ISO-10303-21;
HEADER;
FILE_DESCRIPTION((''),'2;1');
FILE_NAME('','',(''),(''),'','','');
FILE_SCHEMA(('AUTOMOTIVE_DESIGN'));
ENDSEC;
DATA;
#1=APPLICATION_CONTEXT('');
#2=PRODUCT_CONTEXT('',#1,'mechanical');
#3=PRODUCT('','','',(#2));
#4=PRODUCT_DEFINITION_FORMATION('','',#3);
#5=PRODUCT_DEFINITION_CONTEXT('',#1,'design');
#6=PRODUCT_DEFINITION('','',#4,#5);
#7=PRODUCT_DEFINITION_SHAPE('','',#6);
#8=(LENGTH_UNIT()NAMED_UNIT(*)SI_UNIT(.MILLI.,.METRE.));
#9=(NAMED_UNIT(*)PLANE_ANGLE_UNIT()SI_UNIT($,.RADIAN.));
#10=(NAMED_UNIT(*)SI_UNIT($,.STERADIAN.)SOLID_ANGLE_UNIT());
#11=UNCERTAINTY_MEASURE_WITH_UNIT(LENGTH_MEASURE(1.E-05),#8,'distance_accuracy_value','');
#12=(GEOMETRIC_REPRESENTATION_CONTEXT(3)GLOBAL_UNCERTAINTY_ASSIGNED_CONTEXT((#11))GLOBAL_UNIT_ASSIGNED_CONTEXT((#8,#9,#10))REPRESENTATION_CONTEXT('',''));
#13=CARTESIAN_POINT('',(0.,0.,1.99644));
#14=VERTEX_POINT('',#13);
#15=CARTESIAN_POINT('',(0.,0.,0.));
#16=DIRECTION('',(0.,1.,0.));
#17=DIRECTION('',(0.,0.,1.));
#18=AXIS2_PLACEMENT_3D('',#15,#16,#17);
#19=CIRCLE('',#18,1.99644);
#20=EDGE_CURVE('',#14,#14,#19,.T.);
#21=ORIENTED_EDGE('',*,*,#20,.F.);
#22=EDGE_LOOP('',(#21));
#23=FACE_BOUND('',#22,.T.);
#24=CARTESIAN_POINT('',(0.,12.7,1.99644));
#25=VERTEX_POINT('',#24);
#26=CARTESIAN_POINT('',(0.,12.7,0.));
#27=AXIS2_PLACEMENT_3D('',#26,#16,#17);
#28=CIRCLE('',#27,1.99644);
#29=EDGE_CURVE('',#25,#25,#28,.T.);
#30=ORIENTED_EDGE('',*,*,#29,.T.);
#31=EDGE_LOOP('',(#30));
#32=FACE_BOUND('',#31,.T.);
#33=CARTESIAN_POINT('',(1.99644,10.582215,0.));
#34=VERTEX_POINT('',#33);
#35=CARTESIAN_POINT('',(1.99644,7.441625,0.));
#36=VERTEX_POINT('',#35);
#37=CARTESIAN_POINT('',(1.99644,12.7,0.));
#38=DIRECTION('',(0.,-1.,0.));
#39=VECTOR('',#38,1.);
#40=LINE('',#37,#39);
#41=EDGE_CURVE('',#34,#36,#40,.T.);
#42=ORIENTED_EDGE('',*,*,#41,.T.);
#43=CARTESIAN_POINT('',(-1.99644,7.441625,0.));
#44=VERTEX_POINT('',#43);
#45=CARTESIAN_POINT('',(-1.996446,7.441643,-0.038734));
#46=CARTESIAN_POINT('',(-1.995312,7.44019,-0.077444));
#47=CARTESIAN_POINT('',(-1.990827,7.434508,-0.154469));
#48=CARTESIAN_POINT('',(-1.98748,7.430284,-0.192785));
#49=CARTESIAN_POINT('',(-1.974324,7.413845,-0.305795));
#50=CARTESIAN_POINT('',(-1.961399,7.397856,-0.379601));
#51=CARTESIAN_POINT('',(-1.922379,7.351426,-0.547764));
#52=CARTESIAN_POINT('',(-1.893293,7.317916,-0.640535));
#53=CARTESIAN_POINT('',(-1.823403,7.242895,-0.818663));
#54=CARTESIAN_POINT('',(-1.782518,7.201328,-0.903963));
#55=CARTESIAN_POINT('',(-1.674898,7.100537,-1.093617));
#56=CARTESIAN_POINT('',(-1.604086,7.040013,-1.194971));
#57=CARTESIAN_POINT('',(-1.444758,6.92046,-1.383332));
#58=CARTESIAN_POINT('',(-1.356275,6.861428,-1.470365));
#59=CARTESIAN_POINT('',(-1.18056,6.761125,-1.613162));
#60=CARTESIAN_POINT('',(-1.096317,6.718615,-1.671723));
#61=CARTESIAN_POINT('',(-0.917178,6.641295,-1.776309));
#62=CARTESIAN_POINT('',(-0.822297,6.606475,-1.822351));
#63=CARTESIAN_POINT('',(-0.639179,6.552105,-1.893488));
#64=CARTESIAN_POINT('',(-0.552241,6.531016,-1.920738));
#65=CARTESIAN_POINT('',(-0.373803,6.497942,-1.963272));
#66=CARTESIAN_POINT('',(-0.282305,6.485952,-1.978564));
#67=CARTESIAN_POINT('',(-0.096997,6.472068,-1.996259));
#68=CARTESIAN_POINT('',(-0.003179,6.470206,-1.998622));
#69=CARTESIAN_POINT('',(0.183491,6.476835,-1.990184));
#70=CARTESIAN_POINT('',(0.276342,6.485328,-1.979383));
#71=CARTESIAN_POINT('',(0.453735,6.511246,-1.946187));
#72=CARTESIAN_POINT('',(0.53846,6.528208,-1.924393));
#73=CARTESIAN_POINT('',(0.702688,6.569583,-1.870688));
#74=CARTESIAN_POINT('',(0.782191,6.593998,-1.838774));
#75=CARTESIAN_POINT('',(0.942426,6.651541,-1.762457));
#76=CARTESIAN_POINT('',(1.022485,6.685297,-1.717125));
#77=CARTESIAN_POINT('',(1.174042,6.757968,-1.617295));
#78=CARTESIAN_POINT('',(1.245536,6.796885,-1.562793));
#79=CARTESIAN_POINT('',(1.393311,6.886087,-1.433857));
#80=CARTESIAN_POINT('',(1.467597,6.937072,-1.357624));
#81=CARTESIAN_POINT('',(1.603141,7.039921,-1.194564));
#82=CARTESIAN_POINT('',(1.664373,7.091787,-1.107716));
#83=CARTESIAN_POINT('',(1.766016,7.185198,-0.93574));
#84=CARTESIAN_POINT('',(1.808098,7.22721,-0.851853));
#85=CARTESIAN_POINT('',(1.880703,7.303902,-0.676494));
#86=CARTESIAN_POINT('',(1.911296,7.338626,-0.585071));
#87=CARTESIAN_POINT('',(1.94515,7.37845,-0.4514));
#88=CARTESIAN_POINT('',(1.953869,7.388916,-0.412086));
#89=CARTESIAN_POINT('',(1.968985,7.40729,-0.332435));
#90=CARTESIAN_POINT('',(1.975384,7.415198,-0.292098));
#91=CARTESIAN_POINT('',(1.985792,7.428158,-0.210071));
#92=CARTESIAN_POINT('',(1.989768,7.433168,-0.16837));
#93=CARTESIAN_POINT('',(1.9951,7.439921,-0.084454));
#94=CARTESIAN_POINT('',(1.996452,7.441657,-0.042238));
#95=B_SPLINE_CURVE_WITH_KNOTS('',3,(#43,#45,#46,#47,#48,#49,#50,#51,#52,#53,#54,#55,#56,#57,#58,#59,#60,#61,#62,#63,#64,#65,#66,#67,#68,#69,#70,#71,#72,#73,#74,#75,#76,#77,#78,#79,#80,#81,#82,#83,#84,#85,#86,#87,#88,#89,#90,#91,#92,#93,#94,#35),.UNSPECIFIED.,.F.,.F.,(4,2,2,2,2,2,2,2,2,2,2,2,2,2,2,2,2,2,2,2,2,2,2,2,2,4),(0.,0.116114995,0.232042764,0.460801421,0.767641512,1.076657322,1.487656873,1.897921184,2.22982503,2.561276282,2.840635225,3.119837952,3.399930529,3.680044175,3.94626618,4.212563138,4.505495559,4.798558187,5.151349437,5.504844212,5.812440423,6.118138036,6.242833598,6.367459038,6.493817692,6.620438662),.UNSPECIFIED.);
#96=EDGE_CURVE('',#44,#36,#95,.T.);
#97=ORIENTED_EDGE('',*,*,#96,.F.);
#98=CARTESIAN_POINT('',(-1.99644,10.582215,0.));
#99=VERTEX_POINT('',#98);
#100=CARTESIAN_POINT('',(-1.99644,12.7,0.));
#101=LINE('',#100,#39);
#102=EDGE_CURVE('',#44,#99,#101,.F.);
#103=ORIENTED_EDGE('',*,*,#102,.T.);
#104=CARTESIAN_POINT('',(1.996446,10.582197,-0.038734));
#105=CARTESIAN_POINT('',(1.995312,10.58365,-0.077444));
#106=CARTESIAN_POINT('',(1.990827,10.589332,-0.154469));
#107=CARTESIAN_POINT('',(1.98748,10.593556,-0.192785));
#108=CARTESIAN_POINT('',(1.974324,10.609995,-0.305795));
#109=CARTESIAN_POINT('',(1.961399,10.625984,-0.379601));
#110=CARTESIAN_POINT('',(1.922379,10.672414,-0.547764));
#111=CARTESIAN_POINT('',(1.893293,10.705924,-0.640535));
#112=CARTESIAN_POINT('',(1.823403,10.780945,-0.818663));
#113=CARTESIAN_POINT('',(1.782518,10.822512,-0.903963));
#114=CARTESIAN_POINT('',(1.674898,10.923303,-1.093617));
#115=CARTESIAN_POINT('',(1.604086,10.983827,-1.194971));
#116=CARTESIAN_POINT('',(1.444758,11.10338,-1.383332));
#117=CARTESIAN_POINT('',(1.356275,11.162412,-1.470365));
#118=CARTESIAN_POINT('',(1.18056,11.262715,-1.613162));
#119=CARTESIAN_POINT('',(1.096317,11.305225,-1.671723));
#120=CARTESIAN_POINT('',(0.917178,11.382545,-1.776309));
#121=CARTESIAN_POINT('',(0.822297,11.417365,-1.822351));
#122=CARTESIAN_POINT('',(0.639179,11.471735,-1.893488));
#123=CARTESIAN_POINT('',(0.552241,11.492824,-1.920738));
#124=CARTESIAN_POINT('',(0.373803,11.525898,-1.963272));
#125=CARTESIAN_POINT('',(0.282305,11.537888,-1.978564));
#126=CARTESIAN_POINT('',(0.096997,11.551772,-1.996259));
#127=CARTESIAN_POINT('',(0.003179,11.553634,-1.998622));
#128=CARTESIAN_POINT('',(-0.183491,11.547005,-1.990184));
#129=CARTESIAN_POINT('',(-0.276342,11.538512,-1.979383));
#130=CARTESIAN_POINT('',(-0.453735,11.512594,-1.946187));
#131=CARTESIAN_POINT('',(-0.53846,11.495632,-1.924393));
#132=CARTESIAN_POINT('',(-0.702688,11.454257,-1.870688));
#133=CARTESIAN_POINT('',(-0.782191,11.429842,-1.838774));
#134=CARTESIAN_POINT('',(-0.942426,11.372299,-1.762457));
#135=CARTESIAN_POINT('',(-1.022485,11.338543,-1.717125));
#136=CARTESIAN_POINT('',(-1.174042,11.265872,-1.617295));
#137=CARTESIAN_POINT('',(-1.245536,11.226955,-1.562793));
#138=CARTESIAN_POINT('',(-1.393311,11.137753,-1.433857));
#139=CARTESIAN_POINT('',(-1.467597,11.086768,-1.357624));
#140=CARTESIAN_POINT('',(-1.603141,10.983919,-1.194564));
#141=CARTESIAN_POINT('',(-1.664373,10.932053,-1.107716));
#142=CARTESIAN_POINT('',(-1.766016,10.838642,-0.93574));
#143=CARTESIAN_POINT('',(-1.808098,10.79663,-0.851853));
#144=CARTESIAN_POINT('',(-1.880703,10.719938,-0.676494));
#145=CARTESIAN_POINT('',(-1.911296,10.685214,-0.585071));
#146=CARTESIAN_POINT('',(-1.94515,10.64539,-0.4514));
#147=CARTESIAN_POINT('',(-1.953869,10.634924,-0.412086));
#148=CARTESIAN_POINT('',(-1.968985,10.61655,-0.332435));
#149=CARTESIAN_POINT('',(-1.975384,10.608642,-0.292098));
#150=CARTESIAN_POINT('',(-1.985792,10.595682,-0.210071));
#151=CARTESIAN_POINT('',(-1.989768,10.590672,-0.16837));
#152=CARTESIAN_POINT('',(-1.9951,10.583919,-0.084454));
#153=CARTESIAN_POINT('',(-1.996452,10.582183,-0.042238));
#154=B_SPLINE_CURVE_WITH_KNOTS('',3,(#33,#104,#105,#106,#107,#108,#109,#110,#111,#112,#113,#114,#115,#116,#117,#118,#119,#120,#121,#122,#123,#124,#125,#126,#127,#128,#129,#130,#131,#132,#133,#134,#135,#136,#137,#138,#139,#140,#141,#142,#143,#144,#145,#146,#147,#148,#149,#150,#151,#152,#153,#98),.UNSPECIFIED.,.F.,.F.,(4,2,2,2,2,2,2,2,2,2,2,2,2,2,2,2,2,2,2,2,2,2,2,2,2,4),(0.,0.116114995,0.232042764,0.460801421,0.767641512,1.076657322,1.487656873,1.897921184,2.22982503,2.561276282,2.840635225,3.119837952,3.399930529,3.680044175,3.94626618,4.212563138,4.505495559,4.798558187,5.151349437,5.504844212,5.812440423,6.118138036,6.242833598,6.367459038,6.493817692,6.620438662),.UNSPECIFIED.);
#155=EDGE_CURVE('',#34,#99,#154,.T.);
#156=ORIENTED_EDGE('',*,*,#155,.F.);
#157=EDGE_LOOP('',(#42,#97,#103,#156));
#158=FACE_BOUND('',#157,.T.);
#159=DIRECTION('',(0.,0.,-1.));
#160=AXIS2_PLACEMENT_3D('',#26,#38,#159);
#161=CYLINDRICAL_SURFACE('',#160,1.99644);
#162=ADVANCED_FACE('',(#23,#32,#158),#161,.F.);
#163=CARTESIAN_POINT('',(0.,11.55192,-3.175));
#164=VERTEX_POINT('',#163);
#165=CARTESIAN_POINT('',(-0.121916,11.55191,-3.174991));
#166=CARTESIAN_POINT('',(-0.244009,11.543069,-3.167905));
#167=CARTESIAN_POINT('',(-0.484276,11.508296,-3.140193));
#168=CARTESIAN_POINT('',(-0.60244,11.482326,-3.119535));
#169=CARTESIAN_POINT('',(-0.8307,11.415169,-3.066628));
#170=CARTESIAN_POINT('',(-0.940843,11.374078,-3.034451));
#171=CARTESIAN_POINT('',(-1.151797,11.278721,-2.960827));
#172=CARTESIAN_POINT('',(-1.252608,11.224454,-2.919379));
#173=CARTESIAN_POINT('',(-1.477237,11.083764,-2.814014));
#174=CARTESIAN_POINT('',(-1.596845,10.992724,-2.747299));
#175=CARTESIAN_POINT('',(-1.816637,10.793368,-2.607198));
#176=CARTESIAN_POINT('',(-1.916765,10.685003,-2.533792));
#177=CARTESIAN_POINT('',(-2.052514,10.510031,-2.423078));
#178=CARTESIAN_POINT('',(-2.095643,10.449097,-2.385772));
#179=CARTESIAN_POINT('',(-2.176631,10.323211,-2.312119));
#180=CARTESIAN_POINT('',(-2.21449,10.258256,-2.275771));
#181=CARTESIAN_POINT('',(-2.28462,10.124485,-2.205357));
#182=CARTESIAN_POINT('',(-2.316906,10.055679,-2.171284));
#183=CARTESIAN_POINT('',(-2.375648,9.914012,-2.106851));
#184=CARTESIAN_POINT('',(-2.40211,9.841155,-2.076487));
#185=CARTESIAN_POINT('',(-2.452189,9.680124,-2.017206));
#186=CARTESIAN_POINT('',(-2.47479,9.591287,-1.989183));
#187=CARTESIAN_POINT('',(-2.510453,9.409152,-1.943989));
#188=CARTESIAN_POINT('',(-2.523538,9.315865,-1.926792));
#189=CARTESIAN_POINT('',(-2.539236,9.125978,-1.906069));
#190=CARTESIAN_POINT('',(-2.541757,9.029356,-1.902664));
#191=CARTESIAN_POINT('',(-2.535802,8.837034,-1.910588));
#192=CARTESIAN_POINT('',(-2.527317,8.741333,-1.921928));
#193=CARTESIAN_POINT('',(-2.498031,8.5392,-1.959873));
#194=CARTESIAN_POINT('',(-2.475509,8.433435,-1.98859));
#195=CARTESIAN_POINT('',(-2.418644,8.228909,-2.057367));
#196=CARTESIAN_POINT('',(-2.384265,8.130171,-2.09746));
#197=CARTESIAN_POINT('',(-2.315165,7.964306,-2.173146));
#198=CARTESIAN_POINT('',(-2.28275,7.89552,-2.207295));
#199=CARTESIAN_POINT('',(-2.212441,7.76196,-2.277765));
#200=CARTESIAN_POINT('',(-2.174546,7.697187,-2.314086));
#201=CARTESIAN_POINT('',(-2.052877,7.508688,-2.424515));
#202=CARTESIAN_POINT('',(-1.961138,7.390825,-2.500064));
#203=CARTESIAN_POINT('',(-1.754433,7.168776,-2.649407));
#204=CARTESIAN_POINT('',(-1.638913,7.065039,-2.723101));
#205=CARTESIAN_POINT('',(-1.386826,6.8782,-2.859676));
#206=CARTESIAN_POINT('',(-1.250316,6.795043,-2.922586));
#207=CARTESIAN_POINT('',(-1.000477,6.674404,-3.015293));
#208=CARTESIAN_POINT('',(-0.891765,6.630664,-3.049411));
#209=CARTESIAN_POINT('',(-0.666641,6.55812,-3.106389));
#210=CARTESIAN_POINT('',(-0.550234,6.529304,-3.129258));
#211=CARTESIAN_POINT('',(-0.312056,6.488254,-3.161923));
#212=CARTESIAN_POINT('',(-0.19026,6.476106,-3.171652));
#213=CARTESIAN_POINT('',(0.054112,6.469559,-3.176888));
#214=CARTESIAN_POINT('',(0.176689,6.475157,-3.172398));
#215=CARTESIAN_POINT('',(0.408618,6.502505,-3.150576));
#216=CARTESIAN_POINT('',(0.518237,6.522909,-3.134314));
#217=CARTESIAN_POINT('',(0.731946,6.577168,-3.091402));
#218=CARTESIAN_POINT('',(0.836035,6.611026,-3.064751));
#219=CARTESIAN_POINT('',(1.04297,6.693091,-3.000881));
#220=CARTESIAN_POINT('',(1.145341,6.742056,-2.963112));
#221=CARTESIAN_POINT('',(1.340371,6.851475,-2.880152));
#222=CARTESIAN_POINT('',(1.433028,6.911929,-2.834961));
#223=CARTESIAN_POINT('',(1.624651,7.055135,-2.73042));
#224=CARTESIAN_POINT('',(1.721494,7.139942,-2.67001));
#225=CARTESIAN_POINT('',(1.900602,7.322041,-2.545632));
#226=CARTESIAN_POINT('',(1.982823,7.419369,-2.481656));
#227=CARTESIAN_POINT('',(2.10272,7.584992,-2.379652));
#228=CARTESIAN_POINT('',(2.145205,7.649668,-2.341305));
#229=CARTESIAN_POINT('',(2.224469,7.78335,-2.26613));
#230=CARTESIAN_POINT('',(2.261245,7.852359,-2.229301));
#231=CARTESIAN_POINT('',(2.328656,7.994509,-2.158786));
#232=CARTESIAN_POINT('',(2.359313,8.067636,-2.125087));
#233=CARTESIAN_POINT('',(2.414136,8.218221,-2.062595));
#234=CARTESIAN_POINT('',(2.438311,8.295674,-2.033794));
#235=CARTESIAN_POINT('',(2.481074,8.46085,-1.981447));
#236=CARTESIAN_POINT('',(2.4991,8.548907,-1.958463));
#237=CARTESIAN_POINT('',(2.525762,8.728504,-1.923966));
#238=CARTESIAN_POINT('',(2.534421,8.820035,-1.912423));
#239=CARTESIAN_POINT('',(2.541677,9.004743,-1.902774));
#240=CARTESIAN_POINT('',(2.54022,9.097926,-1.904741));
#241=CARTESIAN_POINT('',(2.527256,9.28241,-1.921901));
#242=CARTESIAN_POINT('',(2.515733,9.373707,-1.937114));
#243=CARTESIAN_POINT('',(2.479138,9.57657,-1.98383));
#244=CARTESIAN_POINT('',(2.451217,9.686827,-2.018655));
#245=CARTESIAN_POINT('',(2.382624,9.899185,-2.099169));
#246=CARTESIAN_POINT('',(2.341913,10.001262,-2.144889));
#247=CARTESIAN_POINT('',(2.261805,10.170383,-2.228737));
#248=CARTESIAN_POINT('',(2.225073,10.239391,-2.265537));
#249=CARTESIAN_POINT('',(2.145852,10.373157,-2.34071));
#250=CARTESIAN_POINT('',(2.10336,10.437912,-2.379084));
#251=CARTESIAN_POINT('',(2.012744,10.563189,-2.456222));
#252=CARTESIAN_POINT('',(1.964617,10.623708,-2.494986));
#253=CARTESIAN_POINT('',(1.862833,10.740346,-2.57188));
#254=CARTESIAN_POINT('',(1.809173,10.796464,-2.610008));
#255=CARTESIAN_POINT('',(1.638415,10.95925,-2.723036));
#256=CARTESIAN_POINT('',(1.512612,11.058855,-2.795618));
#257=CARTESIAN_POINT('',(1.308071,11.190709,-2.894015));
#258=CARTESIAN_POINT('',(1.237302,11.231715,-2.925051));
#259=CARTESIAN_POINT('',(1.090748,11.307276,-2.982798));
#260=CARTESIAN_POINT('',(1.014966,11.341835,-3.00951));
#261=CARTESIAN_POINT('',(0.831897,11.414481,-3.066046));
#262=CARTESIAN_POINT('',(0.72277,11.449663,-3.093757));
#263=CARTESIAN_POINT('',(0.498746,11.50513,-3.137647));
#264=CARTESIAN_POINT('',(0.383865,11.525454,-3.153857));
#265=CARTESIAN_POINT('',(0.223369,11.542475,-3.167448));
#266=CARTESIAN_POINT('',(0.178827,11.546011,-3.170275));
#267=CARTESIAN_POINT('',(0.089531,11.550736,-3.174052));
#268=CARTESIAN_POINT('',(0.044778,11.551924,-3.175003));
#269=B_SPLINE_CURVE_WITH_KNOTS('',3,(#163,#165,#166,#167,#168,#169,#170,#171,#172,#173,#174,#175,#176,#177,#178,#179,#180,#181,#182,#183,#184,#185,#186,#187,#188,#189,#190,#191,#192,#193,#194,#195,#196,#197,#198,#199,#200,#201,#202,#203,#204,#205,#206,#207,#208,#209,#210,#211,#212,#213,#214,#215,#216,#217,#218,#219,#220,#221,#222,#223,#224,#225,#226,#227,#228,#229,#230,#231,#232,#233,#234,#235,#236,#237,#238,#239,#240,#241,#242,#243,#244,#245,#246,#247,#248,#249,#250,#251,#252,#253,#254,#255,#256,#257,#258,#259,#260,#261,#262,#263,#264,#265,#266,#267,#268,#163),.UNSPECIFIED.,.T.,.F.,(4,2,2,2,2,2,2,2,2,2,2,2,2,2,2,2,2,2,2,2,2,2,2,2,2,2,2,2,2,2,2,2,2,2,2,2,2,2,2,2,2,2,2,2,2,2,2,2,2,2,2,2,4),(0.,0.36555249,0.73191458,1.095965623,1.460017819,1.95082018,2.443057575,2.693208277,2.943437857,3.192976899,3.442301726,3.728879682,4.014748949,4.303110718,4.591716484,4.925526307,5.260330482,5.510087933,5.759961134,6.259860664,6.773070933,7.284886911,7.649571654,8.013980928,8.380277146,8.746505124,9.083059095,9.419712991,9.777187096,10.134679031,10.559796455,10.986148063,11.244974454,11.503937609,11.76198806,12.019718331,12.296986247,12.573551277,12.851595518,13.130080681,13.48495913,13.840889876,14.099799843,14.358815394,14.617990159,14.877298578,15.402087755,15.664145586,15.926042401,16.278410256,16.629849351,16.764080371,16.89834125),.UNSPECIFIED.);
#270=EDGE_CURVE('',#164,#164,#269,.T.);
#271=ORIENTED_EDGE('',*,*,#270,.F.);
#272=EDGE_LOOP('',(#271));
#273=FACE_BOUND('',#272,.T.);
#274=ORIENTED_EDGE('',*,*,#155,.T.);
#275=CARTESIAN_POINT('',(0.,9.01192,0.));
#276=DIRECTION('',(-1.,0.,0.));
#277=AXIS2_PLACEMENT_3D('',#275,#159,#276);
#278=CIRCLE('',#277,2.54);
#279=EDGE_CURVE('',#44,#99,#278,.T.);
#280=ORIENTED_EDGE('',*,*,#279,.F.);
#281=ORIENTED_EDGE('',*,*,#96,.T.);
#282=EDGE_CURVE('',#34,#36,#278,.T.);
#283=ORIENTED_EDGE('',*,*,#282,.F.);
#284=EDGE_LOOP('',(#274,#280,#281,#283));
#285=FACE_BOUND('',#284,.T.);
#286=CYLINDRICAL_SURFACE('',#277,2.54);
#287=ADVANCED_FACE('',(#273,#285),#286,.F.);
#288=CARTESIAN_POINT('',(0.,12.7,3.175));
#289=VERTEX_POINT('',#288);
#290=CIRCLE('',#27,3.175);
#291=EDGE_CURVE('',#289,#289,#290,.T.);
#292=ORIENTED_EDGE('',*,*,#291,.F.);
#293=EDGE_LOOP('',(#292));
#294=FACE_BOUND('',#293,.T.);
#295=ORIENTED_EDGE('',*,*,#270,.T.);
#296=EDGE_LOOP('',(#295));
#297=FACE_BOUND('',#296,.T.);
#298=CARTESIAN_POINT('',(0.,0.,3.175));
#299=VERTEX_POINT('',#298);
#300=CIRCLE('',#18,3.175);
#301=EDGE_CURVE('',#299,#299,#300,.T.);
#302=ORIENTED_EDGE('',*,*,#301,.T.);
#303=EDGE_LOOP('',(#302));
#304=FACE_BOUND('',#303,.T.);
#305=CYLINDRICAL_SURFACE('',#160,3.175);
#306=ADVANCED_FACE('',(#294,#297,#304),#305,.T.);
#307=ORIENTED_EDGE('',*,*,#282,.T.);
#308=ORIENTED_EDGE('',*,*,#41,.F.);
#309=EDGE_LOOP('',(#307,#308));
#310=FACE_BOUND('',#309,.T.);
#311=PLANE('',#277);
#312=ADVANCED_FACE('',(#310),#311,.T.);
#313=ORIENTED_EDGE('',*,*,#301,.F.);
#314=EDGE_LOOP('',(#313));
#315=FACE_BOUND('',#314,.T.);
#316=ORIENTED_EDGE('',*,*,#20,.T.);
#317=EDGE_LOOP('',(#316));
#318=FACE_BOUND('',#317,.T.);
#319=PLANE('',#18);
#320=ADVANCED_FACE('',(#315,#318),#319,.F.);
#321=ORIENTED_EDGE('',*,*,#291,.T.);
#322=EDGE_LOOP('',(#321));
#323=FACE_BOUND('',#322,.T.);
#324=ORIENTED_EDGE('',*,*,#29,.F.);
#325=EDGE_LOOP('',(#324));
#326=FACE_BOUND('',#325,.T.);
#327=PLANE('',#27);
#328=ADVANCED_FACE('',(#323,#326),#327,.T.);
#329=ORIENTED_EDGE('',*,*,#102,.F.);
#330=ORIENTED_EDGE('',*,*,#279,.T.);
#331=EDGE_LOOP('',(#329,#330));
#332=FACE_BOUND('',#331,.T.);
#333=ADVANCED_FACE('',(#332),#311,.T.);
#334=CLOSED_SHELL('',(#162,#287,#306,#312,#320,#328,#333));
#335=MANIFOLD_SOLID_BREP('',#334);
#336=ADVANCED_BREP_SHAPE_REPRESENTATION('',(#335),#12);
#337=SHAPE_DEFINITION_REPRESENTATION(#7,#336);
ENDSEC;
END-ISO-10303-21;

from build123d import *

# Parameters (mm, degrees)
SKETCH1_R           = 3.175
SKETCH1_R_2         = 1.99644
BOSS_EXTRUDE1_DEPTH = 12.7
SKETCH4_R           = 2.54
CUT_EXTRUDE1_DEPTH  = 3.175


with BuildPart() as part:
    # Sketch1 → Boss-Extrude1 (new body)
    with BuildSketch(Plane(origin=(0, 0, 0), x_dir=(1, 0, 0), z_dir=(0, 1, 0))):
        Circle(SKETCH1_R)
        Circle(SKETCH1_R_2, mode=Mode.SUBTRACT)
    extrude(amount=BOSS_EXTRUDE1_DEPTH)

    # Sketch4 → Cut-Extrude1 (cut)
    with BuildSketch(Plane(origin=(0, 12.7, -3.175), x_dir=(-1, 0, 0), z_dir=(0, 0, -1))):
        with Locations((0, -3.68808)):
            Circle(SKETCH4_R)
    extrude(amount=-CUT_EXTRUDE1_DEPTH, mode=Mode.SUBTRACT)


solid = part.part
